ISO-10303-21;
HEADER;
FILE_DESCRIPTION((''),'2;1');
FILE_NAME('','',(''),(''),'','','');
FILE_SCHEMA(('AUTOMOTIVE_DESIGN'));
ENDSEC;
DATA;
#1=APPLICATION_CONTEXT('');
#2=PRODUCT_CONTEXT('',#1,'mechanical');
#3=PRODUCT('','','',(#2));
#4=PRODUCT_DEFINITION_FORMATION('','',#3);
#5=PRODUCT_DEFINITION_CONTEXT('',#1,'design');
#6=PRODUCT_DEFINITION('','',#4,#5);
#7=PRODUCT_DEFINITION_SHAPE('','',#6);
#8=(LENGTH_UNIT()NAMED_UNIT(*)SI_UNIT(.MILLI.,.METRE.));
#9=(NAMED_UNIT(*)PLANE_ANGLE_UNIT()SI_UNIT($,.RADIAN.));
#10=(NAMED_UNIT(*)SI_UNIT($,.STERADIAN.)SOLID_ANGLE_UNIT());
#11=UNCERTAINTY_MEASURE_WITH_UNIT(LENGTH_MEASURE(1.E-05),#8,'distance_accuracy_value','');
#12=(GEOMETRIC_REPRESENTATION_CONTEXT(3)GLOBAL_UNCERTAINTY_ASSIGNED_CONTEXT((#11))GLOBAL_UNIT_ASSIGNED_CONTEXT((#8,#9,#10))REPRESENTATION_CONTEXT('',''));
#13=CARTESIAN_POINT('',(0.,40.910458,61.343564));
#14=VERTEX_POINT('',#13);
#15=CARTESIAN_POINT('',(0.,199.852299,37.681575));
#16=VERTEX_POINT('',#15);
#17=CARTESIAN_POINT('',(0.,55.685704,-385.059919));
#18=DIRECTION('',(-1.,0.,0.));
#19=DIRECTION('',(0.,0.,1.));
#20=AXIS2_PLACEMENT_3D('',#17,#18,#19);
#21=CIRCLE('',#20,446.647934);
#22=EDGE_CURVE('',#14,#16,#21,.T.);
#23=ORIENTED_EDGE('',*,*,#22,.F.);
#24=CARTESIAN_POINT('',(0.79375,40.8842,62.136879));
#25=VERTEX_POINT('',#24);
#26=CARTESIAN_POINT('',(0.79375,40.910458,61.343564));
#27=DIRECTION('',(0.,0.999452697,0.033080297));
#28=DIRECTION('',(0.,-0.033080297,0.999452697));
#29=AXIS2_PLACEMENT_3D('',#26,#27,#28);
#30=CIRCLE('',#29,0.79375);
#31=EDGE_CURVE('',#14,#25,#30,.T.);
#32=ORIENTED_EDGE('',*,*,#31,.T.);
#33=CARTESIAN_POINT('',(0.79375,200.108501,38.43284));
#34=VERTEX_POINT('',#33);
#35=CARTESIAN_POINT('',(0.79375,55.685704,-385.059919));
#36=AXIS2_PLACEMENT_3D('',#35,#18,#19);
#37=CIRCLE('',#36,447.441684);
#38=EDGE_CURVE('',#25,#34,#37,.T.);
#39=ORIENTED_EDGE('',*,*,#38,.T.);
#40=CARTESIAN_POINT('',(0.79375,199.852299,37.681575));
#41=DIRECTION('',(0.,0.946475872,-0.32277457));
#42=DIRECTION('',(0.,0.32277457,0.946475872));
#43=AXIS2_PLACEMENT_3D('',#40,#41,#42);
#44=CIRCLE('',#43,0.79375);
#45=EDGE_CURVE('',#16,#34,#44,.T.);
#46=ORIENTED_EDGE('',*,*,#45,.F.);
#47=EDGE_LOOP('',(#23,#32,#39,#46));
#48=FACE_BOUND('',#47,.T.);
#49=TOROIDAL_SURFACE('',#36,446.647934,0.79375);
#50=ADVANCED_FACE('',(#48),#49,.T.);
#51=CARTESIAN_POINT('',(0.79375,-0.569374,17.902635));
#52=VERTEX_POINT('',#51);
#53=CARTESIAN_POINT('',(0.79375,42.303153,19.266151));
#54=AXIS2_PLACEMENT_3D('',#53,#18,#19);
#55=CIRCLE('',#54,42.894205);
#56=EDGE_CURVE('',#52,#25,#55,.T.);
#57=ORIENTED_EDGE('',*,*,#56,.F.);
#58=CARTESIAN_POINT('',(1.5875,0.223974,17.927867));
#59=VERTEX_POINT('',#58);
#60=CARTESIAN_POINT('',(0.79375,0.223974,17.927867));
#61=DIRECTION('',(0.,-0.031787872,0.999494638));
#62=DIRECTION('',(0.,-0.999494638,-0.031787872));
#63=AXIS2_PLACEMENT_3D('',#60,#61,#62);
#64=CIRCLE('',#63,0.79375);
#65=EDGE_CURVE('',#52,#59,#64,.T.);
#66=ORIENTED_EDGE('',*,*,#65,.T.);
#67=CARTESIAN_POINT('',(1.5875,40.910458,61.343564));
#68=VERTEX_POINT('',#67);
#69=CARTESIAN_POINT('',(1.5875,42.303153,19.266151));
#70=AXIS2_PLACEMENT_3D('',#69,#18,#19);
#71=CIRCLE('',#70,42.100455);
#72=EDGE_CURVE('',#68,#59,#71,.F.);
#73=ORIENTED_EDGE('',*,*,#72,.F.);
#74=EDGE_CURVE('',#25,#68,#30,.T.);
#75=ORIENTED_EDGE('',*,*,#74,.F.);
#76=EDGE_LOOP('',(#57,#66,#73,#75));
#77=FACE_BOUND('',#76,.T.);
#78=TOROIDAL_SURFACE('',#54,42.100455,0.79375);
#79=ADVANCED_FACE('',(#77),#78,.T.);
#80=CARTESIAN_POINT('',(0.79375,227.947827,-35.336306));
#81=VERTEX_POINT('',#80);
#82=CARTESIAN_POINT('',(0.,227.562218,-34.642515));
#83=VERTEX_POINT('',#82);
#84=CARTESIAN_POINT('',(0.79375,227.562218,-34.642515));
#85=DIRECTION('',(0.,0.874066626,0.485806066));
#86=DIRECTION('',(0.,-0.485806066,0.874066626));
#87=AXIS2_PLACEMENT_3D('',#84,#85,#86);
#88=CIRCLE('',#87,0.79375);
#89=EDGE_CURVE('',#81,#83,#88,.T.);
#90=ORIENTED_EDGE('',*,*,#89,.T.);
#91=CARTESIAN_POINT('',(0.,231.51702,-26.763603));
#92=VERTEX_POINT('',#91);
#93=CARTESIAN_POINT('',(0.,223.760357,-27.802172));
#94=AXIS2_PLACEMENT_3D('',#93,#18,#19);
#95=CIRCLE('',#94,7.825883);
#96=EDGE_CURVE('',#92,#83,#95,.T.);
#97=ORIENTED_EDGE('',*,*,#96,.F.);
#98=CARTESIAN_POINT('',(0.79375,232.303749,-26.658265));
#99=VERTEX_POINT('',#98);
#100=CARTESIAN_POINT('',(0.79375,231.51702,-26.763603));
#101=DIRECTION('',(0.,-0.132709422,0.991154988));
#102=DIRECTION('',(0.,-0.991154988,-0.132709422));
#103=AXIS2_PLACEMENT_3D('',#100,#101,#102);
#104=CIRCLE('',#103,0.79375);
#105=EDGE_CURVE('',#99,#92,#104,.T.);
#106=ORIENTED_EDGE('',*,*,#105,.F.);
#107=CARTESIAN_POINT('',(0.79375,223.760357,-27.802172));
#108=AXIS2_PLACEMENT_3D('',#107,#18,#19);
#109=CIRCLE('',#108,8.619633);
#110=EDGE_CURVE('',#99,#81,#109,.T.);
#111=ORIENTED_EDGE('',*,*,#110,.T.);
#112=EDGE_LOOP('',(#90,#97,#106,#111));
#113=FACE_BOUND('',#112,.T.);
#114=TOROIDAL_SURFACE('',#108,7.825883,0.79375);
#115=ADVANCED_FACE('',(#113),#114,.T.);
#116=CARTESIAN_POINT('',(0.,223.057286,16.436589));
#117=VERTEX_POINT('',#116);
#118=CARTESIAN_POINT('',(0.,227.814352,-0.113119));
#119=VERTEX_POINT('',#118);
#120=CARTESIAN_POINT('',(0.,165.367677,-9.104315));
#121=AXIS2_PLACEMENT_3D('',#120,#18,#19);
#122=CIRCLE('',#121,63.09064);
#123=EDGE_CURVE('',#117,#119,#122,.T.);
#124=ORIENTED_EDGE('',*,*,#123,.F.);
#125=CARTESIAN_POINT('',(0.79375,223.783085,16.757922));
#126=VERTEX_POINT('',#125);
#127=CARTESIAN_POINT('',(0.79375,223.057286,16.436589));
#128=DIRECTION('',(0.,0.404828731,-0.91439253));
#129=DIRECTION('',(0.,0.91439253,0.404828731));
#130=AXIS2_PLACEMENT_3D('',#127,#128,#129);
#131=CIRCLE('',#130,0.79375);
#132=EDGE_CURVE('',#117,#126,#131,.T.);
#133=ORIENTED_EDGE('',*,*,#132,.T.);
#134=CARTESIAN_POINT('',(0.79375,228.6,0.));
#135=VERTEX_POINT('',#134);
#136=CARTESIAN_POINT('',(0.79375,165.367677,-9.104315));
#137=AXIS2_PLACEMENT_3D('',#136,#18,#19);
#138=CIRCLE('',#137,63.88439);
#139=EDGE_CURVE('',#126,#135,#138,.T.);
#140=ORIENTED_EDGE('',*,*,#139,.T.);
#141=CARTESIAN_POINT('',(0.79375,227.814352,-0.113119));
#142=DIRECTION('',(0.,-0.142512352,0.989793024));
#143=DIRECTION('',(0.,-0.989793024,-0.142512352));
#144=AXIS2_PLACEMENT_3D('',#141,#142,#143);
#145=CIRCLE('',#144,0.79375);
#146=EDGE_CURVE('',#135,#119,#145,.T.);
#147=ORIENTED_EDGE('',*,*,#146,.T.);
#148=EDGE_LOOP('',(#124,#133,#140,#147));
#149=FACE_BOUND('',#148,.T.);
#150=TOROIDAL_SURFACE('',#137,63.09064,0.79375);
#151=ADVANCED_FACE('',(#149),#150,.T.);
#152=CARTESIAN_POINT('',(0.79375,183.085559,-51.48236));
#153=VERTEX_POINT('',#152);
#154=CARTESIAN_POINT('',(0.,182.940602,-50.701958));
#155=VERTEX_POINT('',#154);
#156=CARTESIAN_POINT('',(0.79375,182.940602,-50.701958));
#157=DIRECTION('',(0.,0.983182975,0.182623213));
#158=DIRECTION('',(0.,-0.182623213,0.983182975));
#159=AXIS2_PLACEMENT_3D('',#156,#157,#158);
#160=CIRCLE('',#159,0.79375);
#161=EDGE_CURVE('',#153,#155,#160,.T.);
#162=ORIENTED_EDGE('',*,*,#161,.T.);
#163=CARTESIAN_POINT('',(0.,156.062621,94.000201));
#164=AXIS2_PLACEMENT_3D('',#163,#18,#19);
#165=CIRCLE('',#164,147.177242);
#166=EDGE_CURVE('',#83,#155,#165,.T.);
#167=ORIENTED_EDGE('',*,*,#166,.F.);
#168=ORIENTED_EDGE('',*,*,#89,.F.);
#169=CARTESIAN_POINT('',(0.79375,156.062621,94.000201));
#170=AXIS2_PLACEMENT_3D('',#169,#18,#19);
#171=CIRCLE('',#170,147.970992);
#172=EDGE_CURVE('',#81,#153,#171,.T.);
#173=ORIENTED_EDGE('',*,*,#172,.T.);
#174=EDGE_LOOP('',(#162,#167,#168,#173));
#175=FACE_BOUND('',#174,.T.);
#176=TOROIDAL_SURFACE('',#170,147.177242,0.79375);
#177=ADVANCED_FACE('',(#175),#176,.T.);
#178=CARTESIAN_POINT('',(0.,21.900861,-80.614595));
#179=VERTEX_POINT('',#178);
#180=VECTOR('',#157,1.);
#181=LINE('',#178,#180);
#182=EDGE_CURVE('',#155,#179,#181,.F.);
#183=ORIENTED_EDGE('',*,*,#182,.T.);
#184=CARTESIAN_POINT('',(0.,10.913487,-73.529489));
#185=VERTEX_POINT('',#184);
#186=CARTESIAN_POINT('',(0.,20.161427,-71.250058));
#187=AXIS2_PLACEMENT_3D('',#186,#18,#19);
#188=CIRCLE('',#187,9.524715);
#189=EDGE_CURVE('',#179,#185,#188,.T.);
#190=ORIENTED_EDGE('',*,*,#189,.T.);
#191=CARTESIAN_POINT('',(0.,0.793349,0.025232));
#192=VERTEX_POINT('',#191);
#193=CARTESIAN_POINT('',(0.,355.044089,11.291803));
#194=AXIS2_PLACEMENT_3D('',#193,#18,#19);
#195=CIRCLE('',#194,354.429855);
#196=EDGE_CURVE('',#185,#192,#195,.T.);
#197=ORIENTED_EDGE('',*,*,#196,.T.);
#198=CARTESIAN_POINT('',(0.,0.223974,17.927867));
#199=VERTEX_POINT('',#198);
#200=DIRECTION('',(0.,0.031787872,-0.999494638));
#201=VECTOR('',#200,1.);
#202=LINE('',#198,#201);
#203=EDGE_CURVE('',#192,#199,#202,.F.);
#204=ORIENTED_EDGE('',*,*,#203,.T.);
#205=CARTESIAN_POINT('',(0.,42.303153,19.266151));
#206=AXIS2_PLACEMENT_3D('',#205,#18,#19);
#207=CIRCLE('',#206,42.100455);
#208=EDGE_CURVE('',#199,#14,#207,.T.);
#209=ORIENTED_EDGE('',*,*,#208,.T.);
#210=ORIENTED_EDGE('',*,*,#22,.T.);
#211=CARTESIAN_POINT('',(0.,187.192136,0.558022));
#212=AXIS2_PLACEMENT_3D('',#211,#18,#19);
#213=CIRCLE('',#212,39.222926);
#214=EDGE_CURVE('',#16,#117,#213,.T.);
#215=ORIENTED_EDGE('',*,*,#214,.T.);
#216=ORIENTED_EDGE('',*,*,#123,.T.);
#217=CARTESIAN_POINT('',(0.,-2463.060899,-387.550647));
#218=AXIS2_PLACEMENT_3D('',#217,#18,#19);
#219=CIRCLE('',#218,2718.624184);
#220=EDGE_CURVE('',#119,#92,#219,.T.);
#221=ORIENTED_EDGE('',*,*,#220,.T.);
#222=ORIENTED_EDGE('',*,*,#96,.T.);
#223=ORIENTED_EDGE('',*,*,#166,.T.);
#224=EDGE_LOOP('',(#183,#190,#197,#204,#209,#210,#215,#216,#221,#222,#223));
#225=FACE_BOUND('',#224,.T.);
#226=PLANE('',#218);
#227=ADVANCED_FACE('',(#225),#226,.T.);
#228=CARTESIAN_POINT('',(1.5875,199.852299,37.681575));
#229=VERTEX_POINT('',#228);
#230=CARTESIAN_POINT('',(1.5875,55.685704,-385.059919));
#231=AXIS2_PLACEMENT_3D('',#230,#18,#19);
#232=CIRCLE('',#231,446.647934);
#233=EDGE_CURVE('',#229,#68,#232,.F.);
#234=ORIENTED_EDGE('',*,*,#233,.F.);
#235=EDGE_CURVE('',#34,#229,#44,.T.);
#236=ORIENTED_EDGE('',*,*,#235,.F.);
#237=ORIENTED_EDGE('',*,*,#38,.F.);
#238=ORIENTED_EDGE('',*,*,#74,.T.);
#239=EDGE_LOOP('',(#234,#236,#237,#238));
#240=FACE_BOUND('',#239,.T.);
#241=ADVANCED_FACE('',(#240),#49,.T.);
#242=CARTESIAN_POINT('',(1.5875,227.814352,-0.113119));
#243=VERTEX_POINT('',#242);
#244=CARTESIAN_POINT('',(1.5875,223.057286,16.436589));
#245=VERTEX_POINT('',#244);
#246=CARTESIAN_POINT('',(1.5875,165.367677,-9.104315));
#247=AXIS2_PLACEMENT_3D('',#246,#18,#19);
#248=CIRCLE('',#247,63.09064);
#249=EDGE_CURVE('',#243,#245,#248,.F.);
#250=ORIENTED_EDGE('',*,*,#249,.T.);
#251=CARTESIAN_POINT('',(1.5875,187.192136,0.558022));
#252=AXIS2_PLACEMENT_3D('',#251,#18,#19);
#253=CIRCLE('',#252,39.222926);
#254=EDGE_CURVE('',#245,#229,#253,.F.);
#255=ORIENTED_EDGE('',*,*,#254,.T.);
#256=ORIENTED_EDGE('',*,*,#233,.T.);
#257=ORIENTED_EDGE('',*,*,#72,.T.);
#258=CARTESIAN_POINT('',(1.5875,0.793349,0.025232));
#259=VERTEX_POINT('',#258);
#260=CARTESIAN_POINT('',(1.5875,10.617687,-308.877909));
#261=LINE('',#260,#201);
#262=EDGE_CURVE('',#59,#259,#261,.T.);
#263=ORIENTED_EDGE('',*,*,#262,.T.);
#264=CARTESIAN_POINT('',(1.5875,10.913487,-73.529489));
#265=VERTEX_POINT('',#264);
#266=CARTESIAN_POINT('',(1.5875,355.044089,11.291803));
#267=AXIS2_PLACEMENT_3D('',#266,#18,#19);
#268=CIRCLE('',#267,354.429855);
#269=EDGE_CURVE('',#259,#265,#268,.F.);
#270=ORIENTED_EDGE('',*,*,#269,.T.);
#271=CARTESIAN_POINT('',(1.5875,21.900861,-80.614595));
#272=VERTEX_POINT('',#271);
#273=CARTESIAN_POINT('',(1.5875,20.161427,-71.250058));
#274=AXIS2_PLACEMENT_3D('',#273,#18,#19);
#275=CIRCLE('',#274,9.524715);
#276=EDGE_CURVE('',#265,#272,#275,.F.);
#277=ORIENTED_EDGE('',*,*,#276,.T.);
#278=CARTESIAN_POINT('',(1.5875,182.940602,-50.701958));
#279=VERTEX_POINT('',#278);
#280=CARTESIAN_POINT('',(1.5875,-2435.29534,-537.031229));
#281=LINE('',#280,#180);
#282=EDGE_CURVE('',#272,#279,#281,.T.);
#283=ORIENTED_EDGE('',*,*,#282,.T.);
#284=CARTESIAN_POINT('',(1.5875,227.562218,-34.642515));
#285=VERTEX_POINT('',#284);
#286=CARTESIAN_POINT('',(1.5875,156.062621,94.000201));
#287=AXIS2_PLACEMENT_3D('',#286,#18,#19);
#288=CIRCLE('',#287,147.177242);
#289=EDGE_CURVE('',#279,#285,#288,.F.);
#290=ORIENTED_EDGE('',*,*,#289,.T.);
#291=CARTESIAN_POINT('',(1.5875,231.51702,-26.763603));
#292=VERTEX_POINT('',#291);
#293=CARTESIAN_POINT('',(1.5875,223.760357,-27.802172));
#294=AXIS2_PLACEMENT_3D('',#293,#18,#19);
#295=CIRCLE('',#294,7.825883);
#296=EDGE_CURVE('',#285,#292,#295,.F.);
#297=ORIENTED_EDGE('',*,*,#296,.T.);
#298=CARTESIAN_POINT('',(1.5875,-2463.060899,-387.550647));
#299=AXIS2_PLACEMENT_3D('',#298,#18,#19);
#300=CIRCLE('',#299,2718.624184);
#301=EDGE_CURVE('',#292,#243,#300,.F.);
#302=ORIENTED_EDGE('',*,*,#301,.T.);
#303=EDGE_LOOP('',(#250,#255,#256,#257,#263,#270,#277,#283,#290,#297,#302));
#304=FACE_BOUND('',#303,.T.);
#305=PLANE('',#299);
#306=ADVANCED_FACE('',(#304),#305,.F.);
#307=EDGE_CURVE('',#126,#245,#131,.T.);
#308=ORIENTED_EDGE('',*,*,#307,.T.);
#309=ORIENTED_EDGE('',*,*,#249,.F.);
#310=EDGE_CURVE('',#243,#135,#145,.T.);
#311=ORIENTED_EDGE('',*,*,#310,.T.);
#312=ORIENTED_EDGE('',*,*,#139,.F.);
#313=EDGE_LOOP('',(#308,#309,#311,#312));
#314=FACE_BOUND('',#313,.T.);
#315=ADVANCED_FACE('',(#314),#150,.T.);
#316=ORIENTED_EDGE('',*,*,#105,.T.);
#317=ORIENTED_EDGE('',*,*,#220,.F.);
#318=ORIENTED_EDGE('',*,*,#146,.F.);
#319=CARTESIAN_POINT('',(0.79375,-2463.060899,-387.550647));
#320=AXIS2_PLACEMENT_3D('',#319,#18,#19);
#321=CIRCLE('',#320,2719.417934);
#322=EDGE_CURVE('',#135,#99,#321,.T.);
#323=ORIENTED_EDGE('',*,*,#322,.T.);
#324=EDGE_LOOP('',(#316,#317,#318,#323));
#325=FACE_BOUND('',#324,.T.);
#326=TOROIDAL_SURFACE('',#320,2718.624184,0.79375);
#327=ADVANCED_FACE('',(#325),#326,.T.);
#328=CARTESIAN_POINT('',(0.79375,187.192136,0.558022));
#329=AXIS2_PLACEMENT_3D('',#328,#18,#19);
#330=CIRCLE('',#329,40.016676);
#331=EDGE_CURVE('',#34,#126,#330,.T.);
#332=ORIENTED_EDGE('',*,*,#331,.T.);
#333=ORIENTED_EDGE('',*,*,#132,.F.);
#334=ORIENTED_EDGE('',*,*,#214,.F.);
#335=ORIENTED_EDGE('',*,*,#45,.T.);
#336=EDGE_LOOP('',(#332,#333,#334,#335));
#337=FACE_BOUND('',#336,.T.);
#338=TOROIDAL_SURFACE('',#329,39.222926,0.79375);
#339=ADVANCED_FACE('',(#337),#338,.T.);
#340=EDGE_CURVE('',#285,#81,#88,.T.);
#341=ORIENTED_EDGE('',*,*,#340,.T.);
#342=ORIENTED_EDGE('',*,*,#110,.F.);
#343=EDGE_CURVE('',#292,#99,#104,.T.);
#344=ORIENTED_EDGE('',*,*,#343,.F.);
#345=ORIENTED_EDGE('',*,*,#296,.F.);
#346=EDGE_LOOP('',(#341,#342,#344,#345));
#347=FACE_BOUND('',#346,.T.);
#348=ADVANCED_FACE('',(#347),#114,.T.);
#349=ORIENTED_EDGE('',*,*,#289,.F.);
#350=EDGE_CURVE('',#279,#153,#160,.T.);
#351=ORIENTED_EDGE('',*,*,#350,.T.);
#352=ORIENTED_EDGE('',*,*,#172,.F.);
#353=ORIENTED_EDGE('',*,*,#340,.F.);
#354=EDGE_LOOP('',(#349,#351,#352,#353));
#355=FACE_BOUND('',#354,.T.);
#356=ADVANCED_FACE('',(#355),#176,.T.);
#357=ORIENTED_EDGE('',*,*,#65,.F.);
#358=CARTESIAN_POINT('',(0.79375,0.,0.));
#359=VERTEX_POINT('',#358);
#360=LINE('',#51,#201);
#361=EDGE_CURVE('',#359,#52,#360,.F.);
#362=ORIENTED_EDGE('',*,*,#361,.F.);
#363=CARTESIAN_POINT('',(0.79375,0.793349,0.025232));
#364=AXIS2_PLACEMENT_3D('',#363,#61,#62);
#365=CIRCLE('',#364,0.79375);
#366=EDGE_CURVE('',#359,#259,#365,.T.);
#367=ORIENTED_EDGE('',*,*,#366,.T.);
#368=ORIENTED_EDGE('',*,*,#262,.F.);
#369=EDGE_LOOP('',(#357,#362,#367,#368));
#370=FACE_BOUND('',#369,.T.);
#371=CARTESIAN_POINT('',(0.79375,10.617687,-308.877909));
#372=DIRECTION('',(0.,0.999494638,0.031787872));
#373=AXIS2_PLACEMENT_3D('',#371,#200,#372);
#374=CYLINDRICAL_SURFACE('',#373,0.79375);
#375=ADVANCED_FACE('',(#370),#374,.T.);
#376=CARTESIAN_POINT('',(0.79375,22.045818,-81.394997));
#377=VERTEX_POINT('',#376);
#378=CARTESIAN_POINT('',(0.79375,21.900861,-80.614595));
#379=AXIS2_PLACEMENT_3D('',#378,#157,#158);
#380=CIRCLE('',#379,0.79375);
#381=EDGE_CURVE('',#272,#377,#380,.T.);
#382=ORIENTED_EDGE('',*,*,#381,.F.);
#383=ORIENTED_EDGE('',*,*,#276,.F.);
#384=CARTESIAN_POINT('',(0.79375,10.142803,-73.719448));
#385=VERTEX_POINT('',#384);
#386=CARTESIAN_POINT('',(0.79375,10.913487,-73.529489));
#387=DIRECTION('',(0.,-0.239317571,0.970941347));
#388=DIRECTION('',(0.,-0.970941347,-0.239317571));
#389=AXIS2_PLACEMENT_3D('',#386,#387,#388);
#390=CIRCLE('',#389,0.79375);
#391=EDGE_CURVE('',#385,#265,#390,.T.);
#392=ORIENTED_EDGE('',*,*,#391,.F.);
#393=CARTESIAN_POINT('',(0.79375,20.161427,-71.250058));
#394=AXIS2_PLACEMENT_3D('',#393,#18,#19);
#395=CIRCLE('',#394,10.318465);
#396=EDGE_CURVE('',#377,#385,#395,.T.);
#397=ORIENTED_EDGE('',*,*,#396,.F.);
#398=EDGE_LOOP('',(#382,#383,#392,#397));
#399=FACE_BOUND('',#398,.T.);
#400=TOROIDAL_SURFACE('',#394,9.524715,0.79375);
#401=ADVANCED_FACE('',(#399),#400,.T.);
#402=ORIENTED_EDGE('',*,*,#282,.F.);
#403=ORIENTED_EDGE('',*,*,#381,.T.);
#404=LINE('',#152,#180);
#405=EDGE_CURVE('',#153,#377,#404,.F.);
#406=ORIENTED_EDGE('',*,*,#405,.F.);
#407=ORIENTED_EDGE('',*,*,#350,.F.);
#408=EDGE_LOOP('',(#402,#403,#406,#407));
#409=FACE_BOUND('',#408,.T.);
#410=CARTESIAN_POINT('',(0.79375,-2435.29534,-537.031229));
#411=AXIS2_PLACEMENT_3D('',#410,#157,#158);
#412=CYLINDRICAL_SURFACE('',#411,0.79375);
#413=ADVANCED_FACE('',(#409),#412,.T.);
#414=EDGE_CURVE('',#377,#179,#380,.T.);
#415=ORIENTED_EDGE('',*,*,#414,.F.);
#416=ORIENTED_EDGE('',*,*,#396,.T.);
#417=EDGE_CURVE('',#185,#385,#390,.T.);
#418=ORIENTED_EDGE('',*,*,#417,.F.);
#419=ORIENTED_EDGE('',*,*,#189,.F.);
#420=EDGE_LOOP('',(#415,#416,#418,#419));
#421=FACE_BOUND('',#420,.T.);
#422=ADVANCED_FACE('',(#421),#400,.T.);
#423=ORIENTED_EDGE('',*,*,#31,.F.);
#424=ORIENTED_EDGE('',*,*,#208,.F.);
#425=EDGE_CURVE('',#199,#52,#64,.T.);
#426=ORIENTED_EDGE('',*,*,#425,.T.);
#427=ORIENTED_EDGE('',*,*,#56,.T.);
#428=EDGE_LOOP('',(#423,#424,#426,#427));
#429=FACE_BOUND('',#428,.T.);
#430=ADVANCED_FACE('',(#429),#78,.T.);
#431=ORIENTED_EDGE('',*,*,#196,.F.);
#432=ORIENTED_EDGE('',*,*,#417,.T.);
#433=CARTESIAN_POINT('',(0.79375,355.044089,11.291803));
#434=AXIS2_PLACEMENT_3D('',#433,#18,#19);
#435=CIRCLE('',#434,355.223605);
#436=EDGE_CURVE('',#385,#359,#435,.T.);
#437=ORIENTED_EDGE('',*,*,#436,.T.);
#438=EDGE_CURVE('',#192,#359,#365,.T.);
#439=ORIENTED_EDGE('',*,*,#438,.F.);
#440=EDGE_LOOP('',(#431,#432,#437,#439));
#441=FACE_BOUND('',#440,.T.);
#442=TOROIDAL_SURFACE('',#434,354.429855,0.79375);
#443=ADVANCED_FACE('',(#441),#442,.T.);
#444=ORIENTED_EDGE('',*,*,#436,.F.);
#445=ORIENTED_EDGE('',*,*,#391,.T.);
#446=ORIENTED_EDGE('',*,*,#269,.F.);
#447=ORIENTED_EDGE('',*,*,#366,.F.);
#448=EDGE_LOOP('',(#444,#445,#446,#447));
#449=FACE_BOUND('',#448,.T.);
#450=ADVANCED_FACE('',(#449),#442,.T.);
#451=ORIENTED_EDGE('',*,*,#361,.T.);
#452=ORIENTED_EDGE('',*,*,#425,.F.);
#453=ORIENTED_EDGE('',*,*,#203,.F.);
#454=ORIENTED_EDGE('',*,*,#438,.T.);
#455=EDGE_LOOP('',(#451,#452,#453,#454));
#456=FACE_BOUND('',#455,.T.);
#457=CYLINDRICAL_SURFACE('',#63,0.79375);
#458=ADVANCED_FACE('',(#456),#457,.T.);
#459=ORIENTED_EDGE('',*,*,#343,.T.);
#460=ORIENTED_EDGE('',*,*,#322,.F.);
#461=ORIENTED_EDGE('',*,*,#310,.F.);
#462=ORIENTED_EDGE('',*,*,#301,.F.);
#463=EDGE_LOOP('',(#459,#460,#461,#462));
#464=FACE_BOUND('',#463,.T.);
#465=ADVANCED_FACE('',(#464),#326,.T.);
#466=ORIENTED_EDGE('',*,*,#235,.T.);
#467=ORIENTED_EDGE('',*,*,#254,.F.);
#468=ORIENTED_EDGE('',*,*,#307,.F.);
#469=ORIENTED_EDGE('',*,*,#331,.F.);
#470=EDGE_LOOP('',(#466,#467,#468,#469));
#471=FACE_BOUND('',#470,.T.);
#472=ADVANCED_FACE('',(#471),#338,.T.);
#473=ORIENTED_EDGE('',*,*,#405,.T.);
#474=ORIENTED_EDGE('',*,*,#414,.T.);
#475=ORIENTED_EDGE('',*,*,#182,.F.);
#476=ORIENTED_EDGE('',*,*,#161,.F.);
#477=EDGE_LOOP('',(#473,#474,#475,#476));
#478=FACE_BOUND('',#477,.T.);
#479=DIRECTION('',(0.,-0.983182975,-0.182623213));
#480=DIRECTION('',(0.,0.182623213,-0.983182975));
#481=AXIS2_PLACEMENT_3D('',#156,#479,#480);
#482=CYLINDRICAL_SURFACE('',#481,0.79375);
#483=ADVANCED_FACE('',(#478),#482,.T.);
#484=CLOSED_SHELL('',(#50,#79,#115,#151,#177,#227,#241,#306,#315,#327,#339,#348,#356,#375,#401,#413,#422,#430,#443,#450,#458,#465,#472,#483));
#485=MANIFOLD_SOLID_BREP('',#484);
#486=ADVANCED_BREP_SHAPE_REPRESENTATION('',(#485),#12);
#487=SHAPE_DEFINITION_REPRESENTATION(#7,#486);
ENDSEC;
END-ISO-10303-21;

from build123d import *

# Parameters (mm, degrees)
BOSS_EXTRUDE1_DEPTH = 1.5875
FILLET1_R           = 0.79375


with BuildPart() as part:
    # Sketch1 → Boss-Extrude1 (new body)
    with BuildSketch(Plane(origin=(0, 0, 0), x_dir=(0, 0, -1), z_dir=(1, 0, 0))):
        with BuildLine():
            Line((-17.902635187, -0.569374423), (0, 0))
            ThreePointArc((0, 0), (37.12605167, 3.135689948), (73.719447715, 10.142802762))
            ThreePointArc((73.719447715, 10.142802762), (79.921895168, 14.569472776), (81.394996501, 22.045817758))
            Line((81.394996501, 22.045817758), (51.482359978, 183.08555927))
            ThreePointArc((51.482359978, 183.08555927), (45.228157216, 206.171293063), (35.33630552, 227.947826924))
            ThreePointArc((35.33630552, 227.947826924), (31.668987667, 231.46398016), (26.65826502, 232.303749395))
            ThreePointArc((26.65826502, 232.303749395), (13.324550439, 230.484854806), (0, 228.6))
            ThreePointArc((0, 228.6), (-8.544073084, 226.765963851), (-16.757921757, 223.783085471))
            ThreePointArc((-16.757921757, 223.783085471), (-30.073107103, 214.214239464), (-38.432839733, 200.108501446))
            ThreePointArc((-38.432839733, 200.108501446), (-57.504393579, 121.571137315), (-62.136879452, 40.884200297))
            ThreePointArc((-62.136879452, 40.884200297), (-48.597224699, 11.004576546), (-17.902635187, -0.569374423))
        make_face()
    extrude(amount=BOSS_EXTRUDE1_DEPTH)

    # Fillet1
    fillet1_edges = [part.edges().sort_by_distance(p)[0] for p in [
        (0, 226.765963851, 8.544073084),
        (0, 230.484854806, -13.324550439),
        (0, 231.46398016, -31.668987667),
        (0, 206.171293063, -45.228157216),
        (0, 102.565688514, -66.438678239),
        (0, 14.569472776, -79.921895168),
        (0, 3.135689948, -37.12605167),
        (0, -0.284687211, 8.951317593),
        (0, 11.004576546, 48.597224699),
        (0, 121.571137315, 57.504393579),
        (1.5875, 214.214239464, 30.073107103),
        (1.5875, 226.765963851, 8.544073084),
        (1.5875, 230.484854806, -13.324550439),
        (1.5875, 231.46398016, -31.668987667),
        (1.5875, 206.171293063, -45.228157216),
        (1.5875, 102.565688514, -66.438678239),
        (1.5875, 14.569472776, -79.921895168),
        (1.5875, 3.135689948, -37.12605167),
        (1.5875, -0.284687211, 8.951317593),
        (1.5875, 11.004576546, 48.597224699),
        (0, 214.214239464, 30.073107103),
        (1.5875, 121.571137315, 57.504393579),
    ]]
    fillet(fillet1_edges, radius=FILLET1_R - 0.0001)  # a hair under: the kernel refuses the full size


solid = part.part
